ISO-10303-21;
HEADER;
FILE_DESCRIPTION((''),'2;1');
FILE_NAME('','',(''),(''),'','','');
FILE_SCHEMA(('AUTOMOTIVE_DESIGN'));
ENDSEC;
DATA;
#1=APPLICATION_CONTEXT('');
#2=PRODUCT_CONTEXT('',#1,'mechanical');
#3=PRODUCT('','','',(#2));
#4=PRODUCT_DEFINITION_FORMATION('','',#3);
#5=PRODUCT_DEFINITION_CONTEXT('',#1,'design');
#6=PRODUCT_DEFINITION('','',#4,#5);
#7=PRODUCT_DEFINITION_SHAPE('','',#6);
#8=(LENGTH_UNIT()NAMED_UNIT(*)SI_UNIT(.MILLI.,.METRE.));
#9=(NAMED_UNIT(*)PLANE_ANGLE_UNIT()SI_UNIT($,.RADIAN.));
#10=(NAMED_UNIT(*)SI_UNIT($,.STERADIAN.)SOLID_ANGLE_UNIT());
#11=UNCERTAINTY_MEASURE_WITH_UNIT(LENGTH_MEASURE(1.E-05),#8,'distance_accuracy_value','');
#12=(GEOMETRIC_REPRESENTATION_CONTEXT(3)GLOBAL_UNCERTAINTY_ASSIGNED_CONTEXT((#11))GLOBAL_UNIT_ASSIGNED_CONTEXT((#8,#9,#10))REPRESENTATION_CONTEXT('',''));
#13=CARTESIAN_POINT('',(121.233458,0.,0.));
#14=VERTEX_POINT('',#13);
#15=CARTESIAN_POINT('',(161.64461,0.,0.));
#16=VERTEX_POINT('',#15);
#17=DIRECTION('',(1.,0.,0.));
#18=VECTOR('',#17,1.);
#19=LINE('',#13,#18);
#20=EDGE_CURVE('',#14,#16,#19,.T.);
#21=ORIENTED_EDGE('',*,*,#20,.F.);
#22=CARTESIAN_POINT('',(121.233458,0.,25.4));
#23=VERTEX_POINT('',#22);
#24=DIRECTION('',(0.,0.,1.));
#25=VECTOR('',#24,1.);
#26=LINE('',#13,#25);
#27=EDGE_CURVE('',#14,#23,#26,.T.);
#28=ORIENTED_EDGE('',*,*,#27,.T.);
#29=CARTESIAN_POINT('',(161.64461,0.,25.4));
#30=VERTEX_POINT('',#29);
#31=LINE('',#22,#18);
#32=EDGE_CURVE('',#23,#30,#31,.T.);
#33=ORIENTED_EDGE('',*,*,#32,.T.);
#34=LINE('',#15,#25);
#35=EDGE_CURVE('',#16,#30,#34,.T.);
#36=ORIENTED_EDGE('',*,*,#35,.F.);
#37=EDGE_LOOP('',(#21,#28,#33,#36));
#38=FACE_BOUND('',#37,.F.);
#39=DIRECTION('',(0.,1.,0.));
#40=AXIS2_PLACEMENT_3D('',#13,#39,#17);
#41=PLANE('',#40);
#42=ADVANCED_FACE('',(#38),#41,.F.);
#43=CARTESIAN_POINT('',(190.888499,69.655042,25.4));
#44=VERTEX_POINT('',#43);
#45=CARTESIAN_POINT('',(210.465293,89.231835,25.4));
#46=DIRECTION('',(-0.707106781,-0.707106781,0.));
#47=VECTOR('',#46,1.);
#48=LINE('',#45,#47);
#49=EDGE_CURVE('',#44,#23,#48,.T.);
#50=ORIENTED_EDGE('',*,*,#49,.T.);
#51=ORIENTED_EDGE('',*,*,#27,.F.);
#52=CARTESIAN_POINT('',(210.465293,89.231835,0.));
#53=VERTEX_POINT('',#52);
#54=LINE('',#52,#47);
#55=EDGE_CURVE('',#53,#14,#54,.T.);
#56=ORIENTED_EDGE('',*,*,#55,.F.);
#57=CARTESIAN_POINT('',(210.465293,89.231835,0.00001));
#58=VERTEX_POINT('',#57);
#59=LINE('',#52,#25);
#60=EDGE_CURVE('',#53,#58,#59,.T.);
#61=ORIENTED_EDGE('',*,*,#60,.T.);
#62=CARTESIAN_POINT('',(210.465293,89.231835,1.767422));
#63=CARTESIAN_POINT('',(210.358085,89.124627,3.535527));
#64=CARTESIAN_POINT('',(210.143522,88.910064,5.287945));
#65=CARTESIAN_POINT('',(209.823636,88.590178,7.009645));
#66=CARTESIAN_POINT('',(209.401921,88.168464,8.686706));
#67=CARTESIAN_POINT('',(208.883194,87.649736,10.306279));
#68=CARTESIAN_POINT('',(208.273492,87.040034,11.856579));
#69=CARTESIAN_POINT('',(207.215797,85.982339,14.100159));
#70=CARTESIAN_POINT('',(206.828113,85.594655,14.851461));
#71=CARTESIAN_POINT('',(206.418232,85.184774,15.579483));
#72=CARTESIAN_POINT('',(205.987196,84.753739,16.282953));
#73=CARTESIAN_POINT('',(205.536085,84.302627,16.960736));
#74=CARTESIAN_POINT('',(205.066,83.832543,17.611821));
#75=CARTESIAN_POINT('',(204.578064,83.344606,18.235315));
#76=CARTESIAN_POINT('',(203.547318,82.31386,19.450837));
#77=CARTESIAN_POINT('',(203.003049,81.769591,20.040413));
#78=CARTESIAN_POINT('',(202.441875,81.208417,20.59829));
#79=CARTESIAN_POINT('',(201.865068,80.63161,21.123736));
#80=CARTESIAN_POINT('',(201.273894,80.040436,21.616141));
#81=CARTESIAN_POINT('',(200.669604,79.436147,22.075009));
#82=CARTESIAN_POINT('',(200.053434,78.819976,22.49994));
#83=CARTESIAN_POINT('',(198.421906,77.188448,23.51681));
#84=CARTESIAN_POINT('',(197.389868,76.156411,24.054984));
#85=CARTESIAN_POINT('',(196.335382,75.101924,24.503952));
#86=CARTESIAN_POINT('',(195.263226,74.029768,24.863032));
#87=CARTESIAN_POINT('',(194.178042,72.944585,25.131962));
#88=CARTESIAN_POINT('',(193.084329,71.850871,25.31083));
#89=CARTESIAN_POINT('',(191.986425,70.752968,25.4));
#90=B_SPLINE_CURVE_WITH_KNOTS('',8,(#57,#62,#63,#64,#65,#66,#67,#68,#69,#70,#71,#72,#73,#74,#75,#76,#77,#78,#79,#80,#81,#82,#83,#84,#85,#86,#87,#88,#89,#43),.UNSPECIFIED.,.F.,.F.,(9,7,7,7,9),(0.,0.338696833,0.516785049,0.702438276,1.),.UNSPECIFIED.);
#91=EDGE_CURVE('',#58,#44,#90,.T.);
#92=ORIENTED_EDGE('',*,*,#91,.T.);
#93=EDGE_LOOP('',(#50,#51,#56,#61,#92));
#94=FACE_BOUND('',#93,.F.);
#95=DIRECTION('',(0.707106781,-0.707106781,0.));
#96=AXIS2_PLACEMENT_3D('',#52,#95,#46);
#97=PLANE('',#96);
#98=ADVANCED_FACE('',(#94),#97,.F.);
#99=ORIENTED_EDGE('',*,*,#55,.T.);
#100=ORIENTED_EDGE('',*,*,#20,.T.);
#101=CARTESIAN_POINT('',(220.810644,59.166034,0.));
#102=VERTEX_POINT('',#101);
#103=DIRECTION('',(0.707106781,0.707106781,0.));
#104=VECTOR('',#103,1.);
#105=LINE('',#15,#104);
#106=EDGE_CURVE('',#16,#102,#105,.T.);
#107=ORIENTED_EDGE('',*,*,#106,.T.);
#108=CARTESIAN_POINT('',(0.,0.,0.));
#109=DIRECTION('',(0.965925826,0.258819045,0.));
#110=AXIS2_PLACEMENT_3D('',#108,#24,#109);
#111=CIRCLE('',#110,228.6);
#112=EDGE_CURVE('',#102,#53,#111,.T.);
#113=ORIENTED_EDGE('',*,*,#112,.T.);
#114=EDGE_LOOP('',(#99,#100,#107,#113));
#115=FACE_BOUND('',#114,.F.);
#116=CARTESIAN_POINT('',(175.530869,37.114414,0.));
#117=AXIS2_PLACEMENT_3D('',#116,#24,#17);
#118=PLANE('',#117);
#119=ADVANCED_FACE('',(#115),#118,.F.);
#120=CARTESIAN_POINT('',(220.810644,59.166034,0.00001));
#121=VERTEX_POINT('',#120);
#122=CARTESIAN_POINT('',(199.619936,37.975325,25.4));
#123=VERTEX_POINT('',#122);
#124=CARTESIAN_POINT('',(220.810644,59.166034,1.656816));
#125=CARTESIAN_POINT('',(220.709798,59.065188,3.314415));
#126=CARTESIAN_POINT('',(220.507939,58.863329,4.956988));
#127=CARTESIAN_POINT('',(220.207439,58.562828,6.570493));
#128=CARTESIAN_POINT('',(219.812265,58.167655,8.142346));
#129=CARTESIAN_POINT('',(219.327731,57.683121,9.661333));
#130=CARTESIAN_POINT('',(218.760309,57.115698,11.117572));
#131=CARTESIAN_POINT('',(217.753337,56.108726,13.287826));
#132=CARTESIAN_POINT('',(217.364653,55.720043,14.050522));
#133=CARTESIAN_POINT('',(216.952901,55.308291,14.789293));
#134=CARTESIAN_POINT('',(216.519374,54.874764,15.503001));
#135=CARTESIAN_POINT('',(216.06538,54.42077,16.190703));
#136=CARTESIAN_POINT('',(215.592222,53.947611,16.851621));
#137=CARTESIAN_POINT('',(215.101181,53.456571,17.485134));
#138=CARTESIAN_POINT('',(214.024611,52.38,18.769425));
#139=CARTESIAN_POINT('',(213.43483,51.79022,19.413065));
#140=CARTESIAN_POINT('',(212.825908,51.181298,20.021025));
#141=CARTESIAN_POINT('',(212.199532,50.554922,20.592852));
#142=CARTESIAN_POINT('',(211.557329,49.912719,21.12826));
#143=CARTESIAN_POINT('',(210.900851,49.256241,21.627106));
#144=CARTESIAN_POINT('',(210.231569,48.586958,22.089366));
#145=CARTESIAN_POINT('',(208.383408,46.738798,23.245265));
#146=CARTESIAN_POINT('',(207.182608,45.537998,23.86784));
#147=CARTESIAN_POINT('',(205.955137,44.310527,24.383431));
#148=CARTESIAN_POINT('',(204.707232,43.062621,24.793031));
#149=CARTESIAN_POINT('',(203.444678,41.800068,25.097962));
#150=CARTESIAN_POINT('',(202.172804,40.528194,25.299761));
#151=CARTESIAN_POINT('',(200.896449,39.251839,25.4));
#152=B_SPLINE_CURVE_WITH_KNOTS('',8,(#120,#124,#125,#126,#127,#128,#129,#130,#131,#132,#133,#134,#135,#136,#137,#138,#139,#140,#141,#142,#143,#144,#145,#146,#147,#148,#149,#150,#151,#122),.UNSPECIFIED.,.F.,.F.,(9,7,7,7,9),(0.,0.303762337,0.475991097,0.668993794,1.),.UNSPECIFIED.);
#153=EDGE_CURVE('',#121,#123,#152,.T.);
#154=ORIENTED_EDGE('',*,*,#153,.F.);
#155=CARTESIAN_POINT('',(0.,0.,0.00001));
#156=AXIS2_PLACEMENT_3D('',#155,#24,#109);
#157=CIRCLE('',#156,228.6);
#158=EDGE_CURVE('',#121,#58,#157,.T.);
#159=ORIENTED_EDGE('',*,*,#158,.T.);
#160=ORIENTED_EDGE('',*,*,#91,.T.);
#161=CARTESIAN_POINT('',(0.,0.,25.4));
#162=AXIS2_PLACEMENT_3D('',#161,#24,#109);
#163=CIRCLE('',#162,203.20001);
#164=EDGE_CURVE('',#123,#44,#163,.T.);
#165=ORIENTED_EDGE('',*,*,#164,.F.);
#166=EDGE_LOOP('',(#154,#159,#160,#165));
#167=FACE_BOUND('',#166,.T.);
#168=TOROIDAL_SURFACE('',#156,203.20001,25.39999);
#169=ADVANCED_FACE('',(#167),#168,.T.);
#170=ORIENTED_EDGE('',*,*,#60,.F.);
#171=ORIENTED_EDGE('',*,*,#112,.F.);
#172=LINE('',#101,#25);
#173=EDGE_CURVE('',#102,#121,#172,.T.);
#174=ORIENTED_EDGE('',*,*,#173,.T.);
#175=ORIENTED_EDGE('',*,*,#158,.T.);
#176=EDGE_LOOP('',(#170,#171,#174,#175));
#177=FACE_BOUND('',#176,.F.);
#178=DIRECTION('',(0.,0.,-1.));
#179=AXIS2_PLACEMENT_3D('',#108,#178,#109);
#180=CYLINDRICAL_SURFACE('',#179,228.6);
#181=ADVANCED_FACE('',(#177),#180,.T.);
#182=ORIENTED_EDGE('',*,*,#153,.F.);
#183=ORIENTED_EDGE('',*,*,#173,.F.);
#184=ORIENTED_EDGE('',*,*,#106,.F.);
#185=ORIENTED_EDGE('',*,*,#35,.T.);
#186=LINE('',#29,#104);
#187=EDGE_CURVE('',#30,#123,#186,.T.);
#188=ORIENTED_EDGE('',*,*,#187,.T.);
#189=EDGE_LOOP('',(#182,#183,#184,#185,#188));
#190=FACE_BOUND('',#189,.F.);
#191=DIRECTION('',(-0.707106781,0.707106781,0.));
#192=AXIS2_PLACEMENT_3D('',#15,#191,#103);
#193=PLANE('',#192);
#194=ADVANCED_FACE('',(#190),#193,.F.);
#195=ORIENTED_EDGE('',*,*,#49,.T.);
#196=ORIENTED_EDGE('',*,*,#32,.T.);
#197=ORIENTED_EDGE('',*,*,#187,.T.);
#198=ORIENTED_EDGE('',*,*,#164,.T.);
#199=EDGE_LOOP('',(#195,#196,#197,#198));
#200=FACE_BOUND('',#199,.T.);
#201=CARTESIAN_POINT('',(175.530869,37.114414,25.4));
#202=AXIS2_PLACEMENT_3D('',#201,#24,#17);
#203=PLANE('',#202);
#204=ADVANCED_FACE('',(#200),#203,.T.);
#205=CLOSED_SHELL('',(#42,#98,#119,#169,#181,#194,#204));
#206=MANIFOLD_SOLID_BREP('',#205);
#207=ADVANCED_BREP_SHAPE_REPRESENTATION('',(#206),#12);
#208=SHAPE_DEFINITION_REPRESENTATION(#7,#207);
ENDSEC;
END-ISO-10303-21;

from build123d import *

# Parameters (mm, degrees)
F2_DEPTH = 25.4
F3_R     = 25.39999


# Not quite as in the source:
# - a fillet or chamfer is up to 0.001 mm smaller than in the source, because OpenCascade refuses the exact size


with BuildPart() as f2:
    # F1 (on face) → F2 (new body)
    with BuildSketch(Plane.XY):
        with BuildLine():
            Line((210.4652929995, 89.2318353651), (121.2334576344, 0))
            Line((121.2334576344, 0), (161.6446101792, 0))
            Line((161.6446101792, 0), (220.8106438897, 59.1660337104))
            ThreePointArc((220.8106438897, 59.1660337104), (216.1613322086, 74.3790189354), (210.4652929995, 89.2318353651))
        make_face()
    extrude(amount=F2_DEPTH)

    # F3 (radius 25.4 in the source; OpenCascade refuses exactly that, so slightly less here)
    f3_edges = [f2.edges().sort_by_distance(p)[0] for p in [
        (216.161332, 74.379019, 25.4),
    ]]
    fillet(f3_edges, radius=F3_R)


solid = f2.part
